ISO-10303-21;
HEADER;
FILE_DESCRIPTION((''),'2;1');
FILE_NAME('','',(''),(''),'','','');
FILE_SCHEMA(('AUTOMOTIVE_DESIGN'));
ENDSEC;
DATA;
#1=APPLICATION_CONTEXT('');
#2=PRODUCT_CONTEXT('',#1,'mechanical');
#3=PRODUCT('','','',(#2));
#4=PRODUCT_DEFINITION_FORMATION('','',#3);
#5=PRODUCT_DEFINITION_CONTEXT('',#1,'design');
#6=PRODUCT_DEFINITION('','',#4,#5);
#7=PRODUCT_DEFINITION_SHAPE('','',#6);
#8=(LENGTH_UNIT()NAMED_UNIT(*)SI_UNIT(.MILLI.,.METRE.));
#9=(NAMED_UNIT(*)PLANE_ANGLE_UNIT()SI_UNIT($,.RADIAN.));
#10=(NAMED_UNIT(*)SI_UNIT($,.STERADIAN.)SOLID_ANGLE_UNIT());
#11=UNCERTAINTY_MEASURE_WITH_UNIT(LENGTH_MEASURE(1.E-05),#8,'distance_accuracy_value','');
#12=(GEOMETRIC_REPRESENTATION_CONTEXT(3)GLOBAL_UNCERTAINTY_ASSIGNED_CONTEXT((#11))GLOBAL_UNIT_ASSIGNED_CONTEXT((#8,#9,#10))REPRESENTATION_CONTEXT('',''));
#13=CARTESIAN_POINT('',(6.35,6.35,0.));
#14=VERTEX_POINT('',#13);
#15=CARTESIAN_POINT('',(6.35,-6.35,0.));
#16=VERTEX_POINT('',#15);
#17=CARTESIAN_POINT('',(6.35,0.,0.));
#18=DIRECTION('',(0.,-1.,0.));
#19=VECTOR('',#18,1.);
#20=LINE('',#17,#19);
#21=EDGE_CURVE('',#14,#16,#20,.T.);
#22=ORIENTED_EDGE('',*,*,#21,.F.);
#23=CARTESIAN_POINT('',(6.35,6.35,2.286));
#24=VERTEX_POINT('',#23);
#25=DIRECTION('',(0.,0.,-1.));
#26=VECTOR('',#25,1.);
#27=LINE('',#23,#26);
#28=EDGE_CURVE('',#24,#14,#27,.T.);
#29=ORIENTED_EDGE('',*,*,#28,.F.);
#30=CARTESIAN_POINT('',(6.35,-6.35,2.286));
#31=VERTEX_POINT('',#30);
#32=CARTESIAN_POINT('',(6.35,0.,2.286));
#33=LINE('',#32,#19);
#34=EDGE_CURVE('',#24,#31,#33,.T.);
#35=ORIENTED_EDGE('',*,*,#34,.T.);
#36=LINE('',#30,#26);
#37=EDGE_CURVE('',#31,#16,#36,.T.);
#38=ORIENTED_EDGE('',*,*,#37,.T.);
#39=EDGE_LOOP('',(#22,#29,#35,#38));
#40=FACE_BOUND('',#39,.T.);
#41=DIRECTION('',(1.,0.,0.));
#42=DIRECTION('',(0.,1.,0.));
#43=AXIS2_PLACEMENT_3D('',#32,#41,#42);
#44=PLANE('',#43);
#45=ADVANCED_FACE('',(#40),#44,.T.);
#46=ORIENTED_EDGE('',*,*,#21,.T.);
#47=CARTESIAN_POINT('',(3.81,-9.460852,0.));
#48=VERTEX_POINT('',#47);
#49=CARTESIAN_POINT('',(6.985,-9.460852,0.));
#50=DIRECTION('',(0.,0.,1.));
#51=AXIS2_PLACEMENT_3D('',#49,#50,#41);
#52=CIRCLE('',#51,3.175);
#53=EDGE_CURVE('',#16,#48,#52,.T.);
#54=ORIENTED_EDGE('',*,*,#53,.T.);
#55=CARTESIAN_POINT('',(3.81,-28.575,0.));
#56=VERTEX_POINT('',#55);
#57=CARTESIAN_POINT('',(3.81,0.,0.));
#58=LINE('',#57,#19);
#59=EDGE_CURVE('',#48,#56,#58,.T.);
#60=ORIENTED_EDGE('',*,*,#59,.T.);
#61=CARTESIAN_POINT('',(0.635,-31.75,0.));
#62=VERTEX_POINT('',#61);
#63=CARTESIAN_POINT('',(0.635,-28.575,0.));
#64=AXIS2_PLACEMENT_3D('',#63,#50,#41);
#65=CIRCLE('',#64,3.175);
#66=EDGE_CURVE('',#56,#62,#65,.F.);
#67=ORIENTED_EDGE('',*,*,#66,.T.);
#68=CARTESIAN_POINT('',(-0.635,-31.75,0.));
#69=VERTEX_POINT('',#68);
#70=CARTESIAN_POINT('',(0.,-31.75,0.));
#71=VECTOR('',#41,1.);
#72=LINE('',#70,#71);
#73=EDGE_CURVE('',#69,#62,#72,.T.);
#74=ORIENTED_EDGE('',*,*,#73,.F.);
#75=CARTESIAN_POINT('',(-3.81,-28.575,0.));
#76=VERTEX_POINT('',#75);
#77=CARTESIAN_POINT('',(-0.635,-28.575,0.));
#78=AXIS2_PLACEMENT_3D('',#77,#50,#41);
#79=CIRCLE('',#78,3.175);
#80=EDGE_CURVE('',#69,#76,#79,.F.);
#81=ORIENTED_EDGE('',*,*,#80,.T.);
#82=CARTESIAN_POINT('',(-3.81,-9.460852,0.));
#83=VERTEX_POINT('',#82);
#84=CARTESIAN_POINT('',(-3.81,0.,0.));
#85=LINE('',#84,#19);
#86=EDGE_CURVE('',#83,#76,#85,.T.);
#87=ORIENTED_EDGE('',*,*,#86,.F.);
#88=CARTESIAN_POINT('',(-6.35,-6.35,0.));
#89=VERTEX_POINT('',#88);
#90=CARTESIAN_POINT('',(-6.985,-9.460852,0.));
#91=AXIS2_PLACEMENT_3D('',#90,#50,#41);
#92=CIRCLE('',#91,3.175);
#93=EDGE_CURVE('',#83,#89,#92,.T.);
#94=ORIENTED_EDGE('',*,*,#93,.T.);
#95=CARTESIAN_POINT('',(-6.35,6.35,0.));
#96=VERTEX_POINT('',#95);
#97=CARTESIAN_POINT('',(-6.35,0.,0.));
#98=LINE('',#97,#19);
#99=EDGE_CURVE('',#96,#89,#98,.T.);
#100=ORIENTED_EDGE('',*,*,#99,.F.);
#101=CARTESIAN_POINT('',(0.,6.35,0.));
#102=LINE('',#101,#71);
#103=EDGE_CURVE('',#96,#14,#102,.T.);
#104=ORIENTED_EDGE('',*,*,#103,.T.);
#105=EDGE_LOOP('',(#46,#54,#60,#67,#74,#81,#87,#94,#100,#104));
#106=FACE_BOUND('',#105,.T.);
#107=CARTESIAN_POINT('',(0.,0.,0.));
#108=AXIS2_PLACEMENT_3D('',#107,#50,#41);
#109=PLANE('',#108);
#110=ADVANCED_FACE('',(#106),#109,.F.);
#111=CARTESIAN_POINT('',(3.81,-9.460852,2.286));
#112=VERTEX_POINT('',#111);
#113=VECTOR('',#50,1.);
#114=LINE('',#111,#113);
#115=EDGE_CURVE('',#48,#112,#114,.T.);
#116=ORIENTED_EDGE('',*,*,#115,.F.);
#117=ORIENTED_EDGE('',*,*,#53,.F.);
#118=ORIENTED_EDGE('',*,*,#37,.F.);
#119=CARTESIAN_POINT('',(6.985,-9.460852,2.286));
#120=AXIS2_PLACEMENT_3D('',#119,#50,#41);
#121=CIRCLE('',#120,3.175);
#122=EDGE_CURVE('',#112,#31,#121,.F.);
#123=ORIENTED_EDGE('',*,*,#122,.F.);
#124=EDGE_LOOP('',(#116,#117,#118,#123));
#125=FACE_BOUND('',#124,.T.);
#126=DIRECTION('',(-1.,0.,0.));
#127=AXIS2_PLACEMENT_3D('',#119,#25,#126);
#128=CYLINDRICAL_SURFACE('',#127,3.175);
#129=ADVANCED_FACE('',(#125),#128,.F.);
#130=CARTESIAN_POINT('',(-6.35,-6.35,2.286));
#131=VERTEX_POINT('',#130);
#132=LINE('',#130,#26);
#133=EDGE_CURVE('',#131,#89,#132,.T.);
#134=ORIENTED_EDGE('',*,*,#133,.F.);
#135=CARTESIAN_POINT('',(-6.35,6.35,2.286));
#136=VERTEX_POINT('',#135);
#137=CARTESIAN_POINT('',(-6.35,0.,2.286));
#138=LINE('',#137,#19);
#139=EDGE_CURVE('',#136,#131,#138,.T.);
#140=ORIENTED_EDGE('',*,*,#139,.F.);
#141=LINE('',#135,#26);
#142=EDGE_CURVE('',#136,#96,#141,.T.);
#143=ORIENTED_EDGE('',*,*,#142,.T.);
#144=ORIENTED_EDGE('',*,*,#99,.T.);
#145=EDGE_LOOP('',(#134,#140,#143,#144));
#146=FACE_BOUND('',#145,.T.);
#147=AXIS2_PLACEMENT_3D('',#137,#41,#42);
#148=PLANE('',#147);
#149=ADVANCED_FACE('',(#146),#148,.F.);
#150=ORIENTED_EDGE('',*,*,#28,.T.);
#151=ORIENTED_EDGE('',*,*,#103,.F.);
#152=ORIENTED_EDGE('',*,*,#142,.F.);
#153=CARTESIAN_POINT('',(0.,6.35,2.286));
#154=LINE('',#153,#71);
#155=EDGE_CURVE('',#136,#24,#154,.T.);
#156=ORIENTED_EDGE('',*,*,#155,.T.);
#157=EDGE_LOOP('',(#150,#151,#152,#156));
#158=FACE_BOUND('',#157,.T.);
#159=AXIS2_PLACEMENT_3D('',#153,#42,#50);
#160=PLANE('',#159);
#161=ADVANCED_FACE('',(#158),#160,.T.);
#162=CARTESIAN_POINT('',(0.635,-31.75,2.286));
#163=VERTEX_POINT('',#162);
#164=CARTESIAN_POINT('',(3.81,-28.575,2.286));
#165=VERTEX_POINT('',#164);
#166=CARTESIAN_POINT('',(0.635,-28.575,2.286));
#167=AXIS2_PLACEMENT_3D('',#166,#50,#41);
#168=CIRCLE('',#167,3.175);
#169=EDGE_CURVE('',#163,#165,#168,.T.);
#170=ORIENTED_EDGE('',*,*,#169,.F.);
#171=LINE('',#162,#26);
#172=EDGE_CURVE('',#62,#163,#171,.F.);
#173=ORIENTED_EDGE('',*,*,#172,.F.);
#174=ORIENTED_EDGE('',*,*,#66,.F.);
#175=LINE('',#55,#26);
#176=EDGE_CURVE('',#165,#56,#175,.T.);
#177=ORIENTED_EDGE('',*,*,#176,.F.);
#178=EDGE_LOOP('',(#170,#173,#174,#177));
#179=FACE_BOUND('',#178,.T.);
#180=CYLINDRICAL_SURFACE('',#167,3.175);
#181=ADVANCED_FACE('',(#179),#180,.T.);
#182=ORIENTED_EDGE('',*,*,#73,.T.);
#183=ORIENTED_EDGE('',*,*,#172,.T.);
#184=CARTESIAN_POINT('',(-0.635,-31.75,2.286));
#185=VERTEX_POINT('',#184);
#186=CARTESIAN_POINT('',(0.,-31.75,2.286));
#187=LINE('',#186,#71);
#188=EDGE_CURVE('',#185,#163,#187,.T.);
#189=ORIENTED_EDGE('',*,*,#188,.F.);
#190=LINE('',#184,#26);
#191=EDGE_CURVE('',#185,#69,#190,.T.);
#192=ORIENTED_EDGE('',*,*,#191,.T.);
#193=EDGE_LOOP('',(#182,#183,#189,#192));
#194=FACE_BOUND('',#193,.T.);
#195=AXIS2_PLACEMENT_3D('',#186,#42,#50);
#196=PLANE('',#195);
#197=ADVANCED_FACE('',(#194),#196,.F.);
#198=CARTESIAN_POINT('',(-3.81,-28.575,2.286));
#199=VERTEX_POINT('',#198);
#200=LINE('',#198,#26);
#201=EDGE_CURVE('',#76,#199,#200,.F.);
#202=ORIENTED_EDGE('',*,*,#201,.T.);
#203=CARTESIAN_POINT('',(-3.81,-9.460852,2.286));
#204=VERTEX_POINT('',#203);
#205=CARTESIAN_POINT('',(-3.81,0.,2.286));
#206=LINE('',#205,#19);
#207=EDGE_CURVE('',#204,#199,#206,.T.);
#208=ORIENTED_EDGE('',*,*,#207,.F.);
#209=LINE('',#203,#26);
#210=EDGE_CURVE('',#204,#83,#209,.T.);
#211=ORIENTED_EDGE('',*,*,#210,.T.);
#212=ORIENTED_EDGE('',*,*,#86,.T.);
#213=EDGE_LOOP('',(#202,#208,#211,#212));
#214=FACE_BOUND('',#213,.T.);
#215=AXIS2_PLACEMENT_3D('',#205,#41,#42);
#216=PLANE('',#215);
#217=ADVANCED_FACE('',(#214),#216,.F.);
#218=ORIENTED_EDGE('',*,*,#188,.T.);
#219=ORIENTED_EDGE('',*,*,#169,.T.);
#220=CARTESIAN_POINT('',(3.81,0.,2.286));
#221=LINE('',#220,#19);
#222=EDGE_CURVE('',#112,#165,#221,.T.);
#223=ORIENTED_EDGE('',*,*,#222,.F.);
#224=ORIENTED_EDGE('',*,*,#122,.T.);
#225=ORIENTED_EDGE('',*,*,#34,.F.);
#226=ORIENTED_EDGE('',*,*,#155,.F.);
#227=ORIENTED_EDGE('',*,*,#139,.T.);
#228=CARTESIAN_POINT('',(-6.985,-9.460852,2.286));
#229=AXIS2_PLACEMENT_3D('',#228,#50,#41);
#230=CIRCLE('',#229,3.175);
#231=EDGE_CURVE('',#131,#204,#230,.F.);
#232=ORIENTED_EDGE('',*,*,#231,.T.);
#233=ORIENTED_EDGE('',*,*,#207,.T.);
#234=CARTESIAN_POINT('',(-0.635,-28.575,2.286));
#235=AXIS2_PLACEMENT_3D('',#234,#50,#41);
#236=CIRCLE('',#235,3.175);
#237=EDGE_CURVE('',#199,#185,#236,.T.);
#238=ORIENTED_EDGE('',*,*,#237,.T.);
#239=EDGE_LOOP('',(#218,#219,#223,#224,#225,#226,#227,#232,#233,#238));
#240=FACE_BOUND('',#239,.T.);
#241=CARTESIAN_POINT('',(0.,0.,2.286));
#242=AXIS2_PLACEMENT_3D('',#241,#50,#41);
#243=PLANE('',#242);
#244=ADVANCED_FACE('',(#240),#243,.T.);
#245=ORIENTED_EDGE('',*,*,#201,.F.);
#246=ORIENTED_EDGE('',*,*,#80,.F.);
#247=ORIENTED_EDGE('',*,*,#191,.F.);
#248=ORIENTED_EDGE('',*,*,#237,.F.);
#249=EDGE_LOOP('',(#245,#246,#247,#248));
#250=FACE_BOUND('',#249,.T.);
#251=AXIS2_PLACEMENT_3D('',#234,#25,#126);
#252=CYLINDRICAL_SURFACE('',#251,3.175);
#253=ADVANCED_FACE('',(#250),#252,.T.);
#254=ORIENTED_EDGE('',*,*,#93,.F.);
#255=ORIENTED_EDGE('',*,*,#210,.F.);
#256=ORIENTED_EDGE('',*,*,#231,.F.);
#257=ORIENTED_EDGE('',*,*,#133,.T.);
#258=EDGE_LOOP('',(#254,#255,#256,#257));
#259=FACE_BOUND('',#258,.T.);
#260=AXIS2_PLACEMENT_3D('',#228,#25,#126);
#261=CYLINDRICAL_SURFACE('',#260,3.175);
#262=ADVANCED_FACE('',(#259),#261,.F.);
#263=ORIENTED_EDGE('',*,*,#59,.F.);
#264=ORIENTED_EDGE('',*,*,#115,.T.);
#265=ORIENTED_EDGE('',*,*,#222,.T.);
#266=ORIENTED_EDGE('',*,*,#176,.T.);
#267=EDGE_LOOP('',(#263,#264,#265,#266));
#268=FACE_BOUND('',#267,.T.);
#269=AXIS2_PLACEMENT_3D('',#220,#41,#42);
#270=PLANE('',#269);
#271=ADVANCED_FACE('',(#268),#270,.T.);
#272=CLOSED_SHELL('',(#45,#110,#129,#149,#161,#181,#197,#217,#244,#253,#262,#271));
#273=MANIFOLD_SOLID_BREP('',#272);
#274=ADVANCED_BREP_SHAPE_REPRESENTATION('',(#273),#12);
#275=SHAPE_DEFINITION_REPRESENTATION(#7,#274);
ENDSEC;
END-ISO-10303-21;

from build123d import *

# Parameters (mm, degrees)
SKETCH1_W           = 7.62
SKETCH1_H           = 25.4
SKETCH1_W_2         = 12.7
SKETCH1_H_2         = 12.7
BOSS_EXTRUDE1_DEPTH = 2.286
FILLET1_R           = 3.175


with BuildPart() as part:
    # Sketch1 → Boss-Extrude1 (new body)
    with BuildSketch(Plane.XY):
        with Locations((0, -19.05)):
            Rectangle(SKETCH1_W, SKETCH1_H)
        Rectangle(SKETCH1_W_2, SKETCH1_H_2)
    extrude(amount=BOSS_EXTRUDE1_DEPTH)

    # Fillet1
    # the kernel refuses this fillet: 3.175 mm, written as the material it adds along each edge
    with BuildSketch(Plane(origin=(-3.81, -6.35, 0), x_dir=(-1.0, -1.5648025307703881e-12, 0), z_dir=(0, 0, 1))) as fillet1_piece_1:
        with BuildLine():
            CenterArc((3.175, 3.110851973), FILLET1_R, 180, 78.463040967)
            Line((0, 3.110851973), (0, 0))
            Line((0, 0), (2.54, 0))
        make_face()
    extrude(amount=2.286)
    with BuildSketch(Plane(origin=(3.81, -6.35, 0), x_dir=(1.0, -1.5644528542271996e-12, 0), z_dir=(0, 0, 1))) as fillet1_piece_2:
        with BuildLine():
            CenterArc((3.175, -3.110851973), FILLET1_R, 101.536959033, 78.463040967)
            Line((0, -3.110851973), (0, 0))
            Line((0, 0), (2.54, 0))
        make_face()
    extrude(amount=2.286)
    # the kernel refuses this fillet: 3.175 mm, written as the material it takes off along each edge
    with BuildSketch(Plane(origin=(-3.81, -31.75, -7.9375), x_dir=(1, 0, 0), z_dir=(0, 0, 1)), Plane(origin=(3.81, -31.75, -7.9375), x_dir=(0, 1, 0), z_dir=(0, 0, 1))) as fillet1_2_piece_1:
        with BuildLine():
            CenterArc((FILLET1_R, FILLET1_R), FILLET1_R, 180, 90)
            Line((0, FILLET1_R), (0, 0))
            Line((0, 0), (FILLET1_R, 0))
        make_face()
    extrude(amount=18.161, mode=Mode.SUBTRACT)


solid = part.part
